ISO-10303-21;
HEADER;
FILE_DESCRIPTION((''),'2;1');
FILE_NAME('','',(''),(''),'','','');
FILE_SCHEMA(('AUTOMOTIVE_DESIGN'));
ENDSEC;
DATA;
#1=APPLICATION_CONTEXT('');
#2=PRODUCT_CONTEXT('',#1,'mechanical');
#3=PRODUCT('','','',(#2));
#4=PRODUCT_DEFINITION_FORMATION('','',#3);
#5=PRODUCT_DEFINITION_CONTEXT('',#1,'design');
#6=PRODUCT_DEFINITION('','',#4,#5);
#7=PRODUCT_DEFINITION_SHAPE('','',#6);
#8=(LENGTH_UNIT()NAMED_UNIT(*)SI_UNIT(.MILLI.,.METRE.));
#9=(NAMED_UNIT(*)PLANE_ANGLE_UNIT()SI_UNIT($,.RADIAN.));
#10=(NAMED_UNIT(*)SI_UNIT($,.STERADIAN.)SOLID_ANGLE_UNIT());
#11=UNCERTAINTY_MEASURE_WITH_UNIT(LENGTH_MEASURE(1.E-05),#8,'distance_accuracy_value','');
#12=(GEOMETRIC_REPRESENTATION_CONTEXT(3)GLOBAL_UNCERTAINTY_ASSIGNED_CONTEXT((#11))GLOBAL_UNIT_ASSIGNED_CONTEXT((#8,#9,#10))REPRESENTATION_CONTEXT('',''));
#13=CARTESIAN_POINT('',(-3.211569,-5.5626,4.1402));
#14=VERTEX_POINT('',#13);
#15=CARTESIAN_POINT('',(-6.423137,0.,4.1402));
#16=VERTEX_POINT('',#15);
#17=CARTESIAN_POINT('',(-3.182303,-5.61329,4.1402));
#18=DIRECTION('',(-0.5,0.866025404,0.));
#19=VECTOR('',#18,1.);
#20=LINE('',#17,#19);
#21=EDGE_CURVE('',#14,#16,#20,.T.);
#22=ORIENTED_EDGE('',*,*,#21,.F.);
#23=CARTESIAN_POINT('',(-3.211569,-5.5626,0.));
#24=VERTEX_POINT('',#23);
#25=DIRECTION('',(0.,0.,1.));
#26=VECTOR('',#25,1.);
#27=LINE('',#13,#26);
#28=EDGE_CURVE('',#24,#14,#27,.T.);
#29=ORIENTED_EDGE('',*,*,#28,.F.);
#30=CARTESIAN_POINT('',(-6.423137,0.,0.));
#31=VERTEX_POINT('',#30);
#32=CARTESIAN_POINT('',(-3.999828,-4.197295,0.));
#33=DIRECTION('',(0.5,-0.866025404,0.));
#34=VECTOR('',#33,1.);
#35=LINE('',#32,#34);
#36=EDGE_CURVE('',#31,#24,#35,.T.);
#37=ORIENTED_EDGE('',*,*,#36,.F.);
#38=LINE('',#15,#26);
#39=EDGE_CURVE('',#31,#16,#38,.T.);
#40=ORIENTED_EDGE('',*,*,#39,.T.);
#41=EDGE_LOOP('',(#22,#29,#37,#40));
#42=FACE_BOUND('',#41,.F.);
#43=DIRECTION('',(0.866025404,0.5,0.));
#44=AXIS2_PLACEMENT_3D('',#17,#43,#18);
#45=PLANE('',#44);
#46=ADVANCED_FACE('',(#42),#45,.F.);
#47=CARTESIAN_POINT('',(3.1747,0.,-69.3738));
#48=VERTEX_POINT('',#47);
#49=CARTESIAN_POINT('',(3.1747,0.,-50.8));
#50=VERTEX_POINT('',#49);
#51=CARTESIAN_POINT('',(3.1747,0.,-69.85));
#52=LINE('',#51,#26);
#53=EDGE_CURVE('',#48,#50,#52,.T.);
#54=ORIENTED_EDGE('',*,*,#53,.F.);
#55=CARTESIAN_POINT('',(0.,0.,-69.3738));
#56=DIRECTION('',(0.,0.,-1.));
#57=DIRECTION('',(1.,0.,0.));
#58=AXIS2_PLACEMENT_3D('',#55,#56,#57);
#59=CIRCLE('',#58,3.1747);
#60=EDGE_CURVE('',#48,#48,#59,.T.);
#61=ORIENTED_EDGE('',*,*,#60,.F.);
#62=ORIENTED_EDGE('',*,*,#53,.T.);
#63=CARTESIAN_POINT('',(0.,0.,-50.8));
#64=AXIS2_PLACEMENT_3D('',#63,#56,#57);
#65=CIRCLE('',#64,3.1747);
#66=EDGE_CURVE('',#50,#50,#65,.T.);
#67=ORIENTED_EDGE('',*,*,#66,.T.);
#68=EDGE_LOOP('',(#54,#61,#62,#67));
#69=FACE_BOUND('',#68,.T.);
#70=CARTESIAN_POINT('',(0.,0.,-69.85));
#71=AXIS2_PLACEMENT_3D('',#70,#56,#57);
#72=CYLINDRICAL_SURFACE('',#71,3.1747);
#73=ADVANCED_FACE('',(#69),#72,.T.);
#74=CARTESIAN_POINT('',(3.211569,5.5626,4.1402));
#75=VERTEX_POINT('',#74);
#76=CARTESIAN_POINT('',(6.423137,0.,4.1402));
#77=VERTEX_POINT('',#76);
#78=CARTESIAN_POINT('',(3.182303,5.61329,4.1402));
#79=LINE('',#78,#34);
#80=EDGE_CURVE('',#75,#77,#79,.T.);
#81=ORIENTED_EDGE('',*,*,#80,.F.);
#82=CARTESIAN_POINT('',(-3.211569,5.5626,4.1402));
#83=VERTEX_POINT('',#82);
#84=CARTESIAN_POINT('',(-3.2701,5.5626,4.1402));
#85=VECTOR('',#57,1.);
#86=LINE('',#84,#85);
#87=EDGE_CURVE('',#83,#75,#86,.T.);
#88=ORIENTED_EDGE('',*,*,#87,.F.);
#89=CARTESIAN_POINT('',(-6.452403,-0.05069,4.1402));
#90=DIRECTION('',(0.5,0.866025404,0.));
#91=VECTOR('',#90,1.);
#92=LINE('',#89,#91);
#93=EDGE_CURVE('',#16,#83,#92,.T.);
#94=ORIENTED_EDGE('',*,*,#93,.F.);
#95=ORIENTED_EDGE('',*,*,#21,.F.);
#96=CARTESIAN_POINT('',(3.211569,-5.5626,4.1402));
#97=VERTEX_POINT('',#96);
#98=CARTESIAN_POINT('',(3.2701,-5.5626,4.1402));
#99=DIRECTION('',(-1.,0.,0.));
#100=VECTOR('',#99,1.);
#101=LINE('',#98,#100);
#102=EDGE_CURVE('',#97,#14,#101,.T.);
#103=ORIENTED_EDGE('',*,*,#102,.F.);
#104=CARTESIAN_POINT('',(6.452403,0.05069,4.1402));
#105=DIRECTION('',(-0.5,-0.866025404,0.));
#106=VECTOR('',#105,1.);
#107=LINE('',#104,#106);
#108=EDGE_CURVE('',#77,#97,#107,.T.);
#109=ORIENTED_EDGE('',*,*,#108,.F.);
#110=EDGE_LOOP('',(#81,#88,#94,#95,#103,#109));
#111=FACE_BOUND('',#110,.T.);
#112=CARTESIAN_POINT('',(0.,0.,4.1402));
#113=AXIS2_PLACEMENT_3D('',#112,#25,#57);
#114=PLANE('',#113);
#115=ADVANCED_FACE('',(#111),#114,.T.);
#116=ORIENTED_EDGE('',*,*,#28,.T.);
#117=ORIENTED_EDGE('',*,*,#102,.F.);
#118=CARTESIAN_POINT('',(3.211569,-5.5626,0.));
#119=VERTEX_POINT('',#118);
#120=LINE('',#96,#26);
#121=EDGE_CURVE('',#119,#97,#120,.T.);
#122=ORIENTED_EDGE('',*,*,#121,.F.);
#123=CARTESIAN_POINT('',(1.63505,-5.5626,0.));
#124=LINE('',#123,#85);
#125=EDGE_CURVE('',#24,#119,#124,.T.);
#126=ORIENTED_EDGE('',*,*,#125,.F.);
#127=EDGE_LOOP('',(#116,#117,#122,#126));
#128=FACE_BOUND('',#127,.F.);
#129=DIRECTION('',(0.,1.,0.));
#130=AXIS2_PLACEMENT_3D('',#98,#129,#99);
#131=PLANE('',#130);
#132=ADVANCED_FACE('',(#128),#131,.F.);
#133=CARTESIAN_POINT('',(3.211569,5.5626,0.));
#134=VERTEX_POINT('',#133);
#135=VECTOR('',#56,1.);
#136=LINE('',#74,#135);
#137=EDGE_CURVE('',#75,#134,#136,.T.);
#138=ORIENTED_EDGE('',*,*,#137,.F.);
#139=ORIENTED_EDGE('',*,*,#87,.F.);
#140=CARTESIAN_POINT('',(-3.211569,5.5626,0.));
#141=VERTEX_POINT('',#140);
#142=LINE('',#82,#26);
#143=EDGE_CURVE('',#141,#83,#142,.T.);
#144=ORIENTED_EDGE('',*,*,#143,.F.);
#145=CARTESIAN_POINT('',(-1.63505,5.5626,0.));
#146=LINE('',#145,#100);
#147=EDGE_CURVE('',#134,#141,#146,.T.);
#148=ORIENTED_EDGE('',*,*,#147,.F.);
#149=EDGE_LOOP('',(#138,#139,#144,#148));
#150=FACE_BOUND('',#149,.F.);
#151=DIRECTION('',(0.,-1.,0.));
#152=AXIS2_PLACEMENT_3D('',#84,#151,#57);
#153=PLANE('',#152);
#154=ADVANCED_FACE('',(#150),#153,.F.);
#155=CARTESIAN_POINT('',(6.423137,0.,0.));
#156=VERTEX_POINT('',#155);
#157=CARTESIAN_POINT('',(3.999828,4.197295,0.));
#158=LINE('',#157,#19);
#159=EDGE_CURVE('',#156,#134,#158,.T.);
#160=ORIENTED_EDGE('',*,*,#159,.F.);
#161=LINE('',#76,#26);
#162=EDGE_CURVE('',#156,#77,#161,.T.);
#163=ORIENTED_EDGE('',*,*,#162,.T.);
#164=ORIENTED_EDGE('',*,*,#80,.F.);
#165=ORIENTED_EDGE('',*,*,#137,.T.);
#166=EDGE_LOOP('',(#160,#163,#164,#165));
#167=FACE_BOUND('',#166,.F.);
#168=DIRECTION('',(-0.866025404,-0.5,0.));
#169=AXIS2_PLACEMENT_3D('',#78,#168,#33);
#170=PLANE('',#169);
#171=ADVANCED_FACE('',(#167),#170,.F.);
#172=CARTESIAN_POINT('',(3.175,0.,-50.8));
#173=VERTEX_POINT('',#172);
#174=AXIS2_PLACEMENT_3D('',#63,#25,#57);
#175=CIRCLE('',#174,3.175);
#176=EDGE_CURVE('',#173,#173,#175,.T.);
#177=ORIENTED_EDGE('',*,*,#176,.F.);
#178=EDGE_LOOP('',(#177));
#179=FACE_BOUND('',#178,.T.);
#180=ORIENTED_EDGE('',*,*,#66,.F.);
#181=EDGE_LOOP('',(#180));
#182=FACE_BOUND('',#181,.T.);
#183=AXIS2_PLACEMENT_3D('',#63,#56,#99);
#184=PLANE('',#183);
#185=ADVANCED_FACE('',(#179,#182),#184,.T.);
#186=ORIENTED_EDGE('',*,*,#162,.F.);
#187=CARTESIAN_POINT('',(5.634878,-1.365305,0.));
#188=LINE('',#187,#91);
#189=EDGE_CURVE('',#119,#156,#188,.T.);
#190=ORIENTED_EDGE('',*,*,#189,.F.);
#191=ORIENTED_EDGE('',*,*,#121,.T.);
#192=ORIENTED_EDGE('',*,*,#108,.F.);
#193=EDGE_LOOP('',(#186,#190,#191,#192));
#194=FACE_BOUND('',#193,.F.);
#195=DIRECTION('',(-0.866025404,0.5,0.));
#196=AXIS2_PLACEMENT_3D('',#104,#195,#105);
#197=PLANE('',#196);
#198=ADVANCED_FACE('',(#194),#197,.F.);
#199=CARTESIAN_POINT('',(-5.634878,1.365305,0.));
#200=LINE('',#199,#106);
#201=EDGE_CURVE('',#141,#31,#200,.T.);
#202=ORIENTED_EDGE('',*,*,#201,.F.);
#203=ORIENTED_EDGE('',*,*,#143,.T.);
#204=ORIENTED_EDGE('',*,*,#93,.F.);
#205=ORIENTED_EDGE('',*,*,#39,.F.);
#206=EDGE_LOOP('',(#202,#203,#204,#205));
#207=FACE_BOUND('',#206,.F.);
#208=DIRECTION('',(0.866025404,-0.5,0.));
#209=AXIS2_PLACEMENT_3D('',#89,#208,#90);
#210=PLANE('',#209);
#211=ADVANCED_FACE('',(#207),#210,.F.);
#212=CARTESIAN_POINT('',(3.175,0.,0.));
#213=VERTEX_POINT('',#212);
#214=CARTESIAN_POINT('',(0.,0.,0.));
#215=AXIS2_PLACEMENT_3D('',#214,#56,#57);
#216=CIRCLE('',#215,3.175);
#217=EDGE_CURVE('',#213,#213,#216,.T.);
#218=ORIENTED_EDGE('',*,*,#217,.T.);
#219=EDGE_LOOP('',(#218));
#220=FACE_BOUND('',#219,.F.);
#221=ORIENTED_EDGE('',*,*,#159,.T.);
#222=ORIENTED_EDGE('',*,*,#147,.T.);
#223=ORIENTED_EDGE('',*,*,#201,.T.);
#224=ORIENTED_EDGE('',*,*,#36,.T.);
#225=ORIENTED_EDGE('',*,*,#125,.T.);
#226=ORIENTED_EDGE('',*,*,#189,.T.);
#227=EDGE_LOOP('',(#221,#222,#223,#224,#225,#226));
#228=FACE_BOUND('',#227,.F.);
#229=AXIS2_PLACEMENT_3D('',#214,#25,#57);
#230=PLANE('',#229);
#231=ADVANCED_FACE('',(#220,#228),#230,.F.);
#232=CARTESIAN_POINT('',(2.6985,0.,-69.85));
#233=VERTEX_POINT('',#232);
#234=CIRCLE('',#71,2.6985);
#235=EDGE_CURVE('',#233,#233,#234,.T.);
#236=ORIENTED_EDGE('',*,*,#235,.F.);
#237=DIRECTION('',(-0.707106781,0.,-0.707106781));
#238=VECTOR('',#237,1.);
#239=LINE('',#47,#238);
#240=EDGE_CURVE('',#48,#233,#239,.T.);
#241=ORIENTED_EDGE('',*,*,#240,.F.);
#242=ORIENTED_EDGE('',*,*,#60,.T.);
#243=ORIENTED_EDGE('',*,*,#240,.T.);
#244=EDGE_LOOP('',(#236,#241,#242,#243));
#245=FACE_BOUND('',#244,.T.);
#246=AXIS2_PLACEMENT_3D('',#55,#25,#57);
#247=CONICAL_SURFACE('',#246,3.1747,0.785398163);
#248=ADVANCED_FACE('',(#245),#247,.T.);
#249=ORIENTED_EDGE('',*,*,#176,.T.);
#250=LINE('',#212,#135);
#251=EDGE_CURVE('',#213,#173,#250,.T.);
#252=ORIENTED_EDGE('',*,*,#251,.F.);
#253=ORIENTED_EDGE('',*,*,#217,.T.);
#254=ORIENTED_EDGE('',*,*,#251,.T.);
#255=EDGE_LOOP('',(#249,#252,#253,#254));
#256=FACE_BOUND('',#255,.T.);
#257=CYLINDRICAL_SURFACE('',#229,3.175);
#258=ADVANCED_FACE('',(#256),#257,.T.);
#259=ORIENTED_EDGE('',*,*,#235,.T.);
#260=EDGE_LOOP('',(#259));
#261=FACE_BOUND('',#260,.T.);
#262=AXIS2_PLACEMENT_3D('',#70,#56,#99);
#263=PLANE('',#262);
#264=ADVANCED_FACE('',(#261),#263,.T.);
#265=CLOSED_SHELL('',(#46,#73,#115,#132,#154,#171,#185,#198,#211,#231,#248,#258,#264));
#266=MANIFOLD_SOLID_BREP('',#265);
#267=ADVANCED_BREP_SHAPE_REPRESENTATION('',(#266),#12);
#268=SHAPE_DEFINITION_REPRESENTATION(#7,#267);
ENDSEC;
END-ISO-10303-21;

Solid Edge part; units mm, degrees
sketch "Sketch1" plane through (0, 0, 0) normal (0, 0, 1) x (1, 0, 0)
  circle A0 centre (0, 0) radius 6.4526
  dimension "D1" = 12.9052
extrude "Protrusion1" add sketch "Sketch1" along normal blind 4.1402
sketch "Sketch2" plane through (0, 0, 0) normal (0, 0, -1) x (1, 0, 0)
  circle A0 centre (0, 0) radius 3.175
extrude "Protrusion2" add sketch "Sketch2" along normal blind 69.85
sketch "Sketch3" plane through (0, 0, -69.85) normal (0, 0, -1) x (1, 0, 0)
  circle A0 centre (0, 0) radius 3.1747
extrude "Cutout1" cut sketch "Sketch3" against normal blind 19.05 flip side to cut
chamfer "Chamfer_1" distance 0.4762 angle 45 1 edges at (-3.1747, 0, -69.85)
sketch "Sketch4" plane through (0, 0, 4.1402) normal (0, 0, 1) x (1, 0, 0)
  line L0 (-3.2701, 5.5626) -> (3.2701, 5.5626)
  dimension "D1" = 11.1252
extrude "Cutout2" cut sketch "Sketch4" against normal up to next material side at (0, 5.6126, 4.1402)
pattern_circular "Pattern1" count 6 over 360 about axis through (0, 0, 4.1402) along (0, 0, 1) of "Cutout2"
properties part number "24100066"
